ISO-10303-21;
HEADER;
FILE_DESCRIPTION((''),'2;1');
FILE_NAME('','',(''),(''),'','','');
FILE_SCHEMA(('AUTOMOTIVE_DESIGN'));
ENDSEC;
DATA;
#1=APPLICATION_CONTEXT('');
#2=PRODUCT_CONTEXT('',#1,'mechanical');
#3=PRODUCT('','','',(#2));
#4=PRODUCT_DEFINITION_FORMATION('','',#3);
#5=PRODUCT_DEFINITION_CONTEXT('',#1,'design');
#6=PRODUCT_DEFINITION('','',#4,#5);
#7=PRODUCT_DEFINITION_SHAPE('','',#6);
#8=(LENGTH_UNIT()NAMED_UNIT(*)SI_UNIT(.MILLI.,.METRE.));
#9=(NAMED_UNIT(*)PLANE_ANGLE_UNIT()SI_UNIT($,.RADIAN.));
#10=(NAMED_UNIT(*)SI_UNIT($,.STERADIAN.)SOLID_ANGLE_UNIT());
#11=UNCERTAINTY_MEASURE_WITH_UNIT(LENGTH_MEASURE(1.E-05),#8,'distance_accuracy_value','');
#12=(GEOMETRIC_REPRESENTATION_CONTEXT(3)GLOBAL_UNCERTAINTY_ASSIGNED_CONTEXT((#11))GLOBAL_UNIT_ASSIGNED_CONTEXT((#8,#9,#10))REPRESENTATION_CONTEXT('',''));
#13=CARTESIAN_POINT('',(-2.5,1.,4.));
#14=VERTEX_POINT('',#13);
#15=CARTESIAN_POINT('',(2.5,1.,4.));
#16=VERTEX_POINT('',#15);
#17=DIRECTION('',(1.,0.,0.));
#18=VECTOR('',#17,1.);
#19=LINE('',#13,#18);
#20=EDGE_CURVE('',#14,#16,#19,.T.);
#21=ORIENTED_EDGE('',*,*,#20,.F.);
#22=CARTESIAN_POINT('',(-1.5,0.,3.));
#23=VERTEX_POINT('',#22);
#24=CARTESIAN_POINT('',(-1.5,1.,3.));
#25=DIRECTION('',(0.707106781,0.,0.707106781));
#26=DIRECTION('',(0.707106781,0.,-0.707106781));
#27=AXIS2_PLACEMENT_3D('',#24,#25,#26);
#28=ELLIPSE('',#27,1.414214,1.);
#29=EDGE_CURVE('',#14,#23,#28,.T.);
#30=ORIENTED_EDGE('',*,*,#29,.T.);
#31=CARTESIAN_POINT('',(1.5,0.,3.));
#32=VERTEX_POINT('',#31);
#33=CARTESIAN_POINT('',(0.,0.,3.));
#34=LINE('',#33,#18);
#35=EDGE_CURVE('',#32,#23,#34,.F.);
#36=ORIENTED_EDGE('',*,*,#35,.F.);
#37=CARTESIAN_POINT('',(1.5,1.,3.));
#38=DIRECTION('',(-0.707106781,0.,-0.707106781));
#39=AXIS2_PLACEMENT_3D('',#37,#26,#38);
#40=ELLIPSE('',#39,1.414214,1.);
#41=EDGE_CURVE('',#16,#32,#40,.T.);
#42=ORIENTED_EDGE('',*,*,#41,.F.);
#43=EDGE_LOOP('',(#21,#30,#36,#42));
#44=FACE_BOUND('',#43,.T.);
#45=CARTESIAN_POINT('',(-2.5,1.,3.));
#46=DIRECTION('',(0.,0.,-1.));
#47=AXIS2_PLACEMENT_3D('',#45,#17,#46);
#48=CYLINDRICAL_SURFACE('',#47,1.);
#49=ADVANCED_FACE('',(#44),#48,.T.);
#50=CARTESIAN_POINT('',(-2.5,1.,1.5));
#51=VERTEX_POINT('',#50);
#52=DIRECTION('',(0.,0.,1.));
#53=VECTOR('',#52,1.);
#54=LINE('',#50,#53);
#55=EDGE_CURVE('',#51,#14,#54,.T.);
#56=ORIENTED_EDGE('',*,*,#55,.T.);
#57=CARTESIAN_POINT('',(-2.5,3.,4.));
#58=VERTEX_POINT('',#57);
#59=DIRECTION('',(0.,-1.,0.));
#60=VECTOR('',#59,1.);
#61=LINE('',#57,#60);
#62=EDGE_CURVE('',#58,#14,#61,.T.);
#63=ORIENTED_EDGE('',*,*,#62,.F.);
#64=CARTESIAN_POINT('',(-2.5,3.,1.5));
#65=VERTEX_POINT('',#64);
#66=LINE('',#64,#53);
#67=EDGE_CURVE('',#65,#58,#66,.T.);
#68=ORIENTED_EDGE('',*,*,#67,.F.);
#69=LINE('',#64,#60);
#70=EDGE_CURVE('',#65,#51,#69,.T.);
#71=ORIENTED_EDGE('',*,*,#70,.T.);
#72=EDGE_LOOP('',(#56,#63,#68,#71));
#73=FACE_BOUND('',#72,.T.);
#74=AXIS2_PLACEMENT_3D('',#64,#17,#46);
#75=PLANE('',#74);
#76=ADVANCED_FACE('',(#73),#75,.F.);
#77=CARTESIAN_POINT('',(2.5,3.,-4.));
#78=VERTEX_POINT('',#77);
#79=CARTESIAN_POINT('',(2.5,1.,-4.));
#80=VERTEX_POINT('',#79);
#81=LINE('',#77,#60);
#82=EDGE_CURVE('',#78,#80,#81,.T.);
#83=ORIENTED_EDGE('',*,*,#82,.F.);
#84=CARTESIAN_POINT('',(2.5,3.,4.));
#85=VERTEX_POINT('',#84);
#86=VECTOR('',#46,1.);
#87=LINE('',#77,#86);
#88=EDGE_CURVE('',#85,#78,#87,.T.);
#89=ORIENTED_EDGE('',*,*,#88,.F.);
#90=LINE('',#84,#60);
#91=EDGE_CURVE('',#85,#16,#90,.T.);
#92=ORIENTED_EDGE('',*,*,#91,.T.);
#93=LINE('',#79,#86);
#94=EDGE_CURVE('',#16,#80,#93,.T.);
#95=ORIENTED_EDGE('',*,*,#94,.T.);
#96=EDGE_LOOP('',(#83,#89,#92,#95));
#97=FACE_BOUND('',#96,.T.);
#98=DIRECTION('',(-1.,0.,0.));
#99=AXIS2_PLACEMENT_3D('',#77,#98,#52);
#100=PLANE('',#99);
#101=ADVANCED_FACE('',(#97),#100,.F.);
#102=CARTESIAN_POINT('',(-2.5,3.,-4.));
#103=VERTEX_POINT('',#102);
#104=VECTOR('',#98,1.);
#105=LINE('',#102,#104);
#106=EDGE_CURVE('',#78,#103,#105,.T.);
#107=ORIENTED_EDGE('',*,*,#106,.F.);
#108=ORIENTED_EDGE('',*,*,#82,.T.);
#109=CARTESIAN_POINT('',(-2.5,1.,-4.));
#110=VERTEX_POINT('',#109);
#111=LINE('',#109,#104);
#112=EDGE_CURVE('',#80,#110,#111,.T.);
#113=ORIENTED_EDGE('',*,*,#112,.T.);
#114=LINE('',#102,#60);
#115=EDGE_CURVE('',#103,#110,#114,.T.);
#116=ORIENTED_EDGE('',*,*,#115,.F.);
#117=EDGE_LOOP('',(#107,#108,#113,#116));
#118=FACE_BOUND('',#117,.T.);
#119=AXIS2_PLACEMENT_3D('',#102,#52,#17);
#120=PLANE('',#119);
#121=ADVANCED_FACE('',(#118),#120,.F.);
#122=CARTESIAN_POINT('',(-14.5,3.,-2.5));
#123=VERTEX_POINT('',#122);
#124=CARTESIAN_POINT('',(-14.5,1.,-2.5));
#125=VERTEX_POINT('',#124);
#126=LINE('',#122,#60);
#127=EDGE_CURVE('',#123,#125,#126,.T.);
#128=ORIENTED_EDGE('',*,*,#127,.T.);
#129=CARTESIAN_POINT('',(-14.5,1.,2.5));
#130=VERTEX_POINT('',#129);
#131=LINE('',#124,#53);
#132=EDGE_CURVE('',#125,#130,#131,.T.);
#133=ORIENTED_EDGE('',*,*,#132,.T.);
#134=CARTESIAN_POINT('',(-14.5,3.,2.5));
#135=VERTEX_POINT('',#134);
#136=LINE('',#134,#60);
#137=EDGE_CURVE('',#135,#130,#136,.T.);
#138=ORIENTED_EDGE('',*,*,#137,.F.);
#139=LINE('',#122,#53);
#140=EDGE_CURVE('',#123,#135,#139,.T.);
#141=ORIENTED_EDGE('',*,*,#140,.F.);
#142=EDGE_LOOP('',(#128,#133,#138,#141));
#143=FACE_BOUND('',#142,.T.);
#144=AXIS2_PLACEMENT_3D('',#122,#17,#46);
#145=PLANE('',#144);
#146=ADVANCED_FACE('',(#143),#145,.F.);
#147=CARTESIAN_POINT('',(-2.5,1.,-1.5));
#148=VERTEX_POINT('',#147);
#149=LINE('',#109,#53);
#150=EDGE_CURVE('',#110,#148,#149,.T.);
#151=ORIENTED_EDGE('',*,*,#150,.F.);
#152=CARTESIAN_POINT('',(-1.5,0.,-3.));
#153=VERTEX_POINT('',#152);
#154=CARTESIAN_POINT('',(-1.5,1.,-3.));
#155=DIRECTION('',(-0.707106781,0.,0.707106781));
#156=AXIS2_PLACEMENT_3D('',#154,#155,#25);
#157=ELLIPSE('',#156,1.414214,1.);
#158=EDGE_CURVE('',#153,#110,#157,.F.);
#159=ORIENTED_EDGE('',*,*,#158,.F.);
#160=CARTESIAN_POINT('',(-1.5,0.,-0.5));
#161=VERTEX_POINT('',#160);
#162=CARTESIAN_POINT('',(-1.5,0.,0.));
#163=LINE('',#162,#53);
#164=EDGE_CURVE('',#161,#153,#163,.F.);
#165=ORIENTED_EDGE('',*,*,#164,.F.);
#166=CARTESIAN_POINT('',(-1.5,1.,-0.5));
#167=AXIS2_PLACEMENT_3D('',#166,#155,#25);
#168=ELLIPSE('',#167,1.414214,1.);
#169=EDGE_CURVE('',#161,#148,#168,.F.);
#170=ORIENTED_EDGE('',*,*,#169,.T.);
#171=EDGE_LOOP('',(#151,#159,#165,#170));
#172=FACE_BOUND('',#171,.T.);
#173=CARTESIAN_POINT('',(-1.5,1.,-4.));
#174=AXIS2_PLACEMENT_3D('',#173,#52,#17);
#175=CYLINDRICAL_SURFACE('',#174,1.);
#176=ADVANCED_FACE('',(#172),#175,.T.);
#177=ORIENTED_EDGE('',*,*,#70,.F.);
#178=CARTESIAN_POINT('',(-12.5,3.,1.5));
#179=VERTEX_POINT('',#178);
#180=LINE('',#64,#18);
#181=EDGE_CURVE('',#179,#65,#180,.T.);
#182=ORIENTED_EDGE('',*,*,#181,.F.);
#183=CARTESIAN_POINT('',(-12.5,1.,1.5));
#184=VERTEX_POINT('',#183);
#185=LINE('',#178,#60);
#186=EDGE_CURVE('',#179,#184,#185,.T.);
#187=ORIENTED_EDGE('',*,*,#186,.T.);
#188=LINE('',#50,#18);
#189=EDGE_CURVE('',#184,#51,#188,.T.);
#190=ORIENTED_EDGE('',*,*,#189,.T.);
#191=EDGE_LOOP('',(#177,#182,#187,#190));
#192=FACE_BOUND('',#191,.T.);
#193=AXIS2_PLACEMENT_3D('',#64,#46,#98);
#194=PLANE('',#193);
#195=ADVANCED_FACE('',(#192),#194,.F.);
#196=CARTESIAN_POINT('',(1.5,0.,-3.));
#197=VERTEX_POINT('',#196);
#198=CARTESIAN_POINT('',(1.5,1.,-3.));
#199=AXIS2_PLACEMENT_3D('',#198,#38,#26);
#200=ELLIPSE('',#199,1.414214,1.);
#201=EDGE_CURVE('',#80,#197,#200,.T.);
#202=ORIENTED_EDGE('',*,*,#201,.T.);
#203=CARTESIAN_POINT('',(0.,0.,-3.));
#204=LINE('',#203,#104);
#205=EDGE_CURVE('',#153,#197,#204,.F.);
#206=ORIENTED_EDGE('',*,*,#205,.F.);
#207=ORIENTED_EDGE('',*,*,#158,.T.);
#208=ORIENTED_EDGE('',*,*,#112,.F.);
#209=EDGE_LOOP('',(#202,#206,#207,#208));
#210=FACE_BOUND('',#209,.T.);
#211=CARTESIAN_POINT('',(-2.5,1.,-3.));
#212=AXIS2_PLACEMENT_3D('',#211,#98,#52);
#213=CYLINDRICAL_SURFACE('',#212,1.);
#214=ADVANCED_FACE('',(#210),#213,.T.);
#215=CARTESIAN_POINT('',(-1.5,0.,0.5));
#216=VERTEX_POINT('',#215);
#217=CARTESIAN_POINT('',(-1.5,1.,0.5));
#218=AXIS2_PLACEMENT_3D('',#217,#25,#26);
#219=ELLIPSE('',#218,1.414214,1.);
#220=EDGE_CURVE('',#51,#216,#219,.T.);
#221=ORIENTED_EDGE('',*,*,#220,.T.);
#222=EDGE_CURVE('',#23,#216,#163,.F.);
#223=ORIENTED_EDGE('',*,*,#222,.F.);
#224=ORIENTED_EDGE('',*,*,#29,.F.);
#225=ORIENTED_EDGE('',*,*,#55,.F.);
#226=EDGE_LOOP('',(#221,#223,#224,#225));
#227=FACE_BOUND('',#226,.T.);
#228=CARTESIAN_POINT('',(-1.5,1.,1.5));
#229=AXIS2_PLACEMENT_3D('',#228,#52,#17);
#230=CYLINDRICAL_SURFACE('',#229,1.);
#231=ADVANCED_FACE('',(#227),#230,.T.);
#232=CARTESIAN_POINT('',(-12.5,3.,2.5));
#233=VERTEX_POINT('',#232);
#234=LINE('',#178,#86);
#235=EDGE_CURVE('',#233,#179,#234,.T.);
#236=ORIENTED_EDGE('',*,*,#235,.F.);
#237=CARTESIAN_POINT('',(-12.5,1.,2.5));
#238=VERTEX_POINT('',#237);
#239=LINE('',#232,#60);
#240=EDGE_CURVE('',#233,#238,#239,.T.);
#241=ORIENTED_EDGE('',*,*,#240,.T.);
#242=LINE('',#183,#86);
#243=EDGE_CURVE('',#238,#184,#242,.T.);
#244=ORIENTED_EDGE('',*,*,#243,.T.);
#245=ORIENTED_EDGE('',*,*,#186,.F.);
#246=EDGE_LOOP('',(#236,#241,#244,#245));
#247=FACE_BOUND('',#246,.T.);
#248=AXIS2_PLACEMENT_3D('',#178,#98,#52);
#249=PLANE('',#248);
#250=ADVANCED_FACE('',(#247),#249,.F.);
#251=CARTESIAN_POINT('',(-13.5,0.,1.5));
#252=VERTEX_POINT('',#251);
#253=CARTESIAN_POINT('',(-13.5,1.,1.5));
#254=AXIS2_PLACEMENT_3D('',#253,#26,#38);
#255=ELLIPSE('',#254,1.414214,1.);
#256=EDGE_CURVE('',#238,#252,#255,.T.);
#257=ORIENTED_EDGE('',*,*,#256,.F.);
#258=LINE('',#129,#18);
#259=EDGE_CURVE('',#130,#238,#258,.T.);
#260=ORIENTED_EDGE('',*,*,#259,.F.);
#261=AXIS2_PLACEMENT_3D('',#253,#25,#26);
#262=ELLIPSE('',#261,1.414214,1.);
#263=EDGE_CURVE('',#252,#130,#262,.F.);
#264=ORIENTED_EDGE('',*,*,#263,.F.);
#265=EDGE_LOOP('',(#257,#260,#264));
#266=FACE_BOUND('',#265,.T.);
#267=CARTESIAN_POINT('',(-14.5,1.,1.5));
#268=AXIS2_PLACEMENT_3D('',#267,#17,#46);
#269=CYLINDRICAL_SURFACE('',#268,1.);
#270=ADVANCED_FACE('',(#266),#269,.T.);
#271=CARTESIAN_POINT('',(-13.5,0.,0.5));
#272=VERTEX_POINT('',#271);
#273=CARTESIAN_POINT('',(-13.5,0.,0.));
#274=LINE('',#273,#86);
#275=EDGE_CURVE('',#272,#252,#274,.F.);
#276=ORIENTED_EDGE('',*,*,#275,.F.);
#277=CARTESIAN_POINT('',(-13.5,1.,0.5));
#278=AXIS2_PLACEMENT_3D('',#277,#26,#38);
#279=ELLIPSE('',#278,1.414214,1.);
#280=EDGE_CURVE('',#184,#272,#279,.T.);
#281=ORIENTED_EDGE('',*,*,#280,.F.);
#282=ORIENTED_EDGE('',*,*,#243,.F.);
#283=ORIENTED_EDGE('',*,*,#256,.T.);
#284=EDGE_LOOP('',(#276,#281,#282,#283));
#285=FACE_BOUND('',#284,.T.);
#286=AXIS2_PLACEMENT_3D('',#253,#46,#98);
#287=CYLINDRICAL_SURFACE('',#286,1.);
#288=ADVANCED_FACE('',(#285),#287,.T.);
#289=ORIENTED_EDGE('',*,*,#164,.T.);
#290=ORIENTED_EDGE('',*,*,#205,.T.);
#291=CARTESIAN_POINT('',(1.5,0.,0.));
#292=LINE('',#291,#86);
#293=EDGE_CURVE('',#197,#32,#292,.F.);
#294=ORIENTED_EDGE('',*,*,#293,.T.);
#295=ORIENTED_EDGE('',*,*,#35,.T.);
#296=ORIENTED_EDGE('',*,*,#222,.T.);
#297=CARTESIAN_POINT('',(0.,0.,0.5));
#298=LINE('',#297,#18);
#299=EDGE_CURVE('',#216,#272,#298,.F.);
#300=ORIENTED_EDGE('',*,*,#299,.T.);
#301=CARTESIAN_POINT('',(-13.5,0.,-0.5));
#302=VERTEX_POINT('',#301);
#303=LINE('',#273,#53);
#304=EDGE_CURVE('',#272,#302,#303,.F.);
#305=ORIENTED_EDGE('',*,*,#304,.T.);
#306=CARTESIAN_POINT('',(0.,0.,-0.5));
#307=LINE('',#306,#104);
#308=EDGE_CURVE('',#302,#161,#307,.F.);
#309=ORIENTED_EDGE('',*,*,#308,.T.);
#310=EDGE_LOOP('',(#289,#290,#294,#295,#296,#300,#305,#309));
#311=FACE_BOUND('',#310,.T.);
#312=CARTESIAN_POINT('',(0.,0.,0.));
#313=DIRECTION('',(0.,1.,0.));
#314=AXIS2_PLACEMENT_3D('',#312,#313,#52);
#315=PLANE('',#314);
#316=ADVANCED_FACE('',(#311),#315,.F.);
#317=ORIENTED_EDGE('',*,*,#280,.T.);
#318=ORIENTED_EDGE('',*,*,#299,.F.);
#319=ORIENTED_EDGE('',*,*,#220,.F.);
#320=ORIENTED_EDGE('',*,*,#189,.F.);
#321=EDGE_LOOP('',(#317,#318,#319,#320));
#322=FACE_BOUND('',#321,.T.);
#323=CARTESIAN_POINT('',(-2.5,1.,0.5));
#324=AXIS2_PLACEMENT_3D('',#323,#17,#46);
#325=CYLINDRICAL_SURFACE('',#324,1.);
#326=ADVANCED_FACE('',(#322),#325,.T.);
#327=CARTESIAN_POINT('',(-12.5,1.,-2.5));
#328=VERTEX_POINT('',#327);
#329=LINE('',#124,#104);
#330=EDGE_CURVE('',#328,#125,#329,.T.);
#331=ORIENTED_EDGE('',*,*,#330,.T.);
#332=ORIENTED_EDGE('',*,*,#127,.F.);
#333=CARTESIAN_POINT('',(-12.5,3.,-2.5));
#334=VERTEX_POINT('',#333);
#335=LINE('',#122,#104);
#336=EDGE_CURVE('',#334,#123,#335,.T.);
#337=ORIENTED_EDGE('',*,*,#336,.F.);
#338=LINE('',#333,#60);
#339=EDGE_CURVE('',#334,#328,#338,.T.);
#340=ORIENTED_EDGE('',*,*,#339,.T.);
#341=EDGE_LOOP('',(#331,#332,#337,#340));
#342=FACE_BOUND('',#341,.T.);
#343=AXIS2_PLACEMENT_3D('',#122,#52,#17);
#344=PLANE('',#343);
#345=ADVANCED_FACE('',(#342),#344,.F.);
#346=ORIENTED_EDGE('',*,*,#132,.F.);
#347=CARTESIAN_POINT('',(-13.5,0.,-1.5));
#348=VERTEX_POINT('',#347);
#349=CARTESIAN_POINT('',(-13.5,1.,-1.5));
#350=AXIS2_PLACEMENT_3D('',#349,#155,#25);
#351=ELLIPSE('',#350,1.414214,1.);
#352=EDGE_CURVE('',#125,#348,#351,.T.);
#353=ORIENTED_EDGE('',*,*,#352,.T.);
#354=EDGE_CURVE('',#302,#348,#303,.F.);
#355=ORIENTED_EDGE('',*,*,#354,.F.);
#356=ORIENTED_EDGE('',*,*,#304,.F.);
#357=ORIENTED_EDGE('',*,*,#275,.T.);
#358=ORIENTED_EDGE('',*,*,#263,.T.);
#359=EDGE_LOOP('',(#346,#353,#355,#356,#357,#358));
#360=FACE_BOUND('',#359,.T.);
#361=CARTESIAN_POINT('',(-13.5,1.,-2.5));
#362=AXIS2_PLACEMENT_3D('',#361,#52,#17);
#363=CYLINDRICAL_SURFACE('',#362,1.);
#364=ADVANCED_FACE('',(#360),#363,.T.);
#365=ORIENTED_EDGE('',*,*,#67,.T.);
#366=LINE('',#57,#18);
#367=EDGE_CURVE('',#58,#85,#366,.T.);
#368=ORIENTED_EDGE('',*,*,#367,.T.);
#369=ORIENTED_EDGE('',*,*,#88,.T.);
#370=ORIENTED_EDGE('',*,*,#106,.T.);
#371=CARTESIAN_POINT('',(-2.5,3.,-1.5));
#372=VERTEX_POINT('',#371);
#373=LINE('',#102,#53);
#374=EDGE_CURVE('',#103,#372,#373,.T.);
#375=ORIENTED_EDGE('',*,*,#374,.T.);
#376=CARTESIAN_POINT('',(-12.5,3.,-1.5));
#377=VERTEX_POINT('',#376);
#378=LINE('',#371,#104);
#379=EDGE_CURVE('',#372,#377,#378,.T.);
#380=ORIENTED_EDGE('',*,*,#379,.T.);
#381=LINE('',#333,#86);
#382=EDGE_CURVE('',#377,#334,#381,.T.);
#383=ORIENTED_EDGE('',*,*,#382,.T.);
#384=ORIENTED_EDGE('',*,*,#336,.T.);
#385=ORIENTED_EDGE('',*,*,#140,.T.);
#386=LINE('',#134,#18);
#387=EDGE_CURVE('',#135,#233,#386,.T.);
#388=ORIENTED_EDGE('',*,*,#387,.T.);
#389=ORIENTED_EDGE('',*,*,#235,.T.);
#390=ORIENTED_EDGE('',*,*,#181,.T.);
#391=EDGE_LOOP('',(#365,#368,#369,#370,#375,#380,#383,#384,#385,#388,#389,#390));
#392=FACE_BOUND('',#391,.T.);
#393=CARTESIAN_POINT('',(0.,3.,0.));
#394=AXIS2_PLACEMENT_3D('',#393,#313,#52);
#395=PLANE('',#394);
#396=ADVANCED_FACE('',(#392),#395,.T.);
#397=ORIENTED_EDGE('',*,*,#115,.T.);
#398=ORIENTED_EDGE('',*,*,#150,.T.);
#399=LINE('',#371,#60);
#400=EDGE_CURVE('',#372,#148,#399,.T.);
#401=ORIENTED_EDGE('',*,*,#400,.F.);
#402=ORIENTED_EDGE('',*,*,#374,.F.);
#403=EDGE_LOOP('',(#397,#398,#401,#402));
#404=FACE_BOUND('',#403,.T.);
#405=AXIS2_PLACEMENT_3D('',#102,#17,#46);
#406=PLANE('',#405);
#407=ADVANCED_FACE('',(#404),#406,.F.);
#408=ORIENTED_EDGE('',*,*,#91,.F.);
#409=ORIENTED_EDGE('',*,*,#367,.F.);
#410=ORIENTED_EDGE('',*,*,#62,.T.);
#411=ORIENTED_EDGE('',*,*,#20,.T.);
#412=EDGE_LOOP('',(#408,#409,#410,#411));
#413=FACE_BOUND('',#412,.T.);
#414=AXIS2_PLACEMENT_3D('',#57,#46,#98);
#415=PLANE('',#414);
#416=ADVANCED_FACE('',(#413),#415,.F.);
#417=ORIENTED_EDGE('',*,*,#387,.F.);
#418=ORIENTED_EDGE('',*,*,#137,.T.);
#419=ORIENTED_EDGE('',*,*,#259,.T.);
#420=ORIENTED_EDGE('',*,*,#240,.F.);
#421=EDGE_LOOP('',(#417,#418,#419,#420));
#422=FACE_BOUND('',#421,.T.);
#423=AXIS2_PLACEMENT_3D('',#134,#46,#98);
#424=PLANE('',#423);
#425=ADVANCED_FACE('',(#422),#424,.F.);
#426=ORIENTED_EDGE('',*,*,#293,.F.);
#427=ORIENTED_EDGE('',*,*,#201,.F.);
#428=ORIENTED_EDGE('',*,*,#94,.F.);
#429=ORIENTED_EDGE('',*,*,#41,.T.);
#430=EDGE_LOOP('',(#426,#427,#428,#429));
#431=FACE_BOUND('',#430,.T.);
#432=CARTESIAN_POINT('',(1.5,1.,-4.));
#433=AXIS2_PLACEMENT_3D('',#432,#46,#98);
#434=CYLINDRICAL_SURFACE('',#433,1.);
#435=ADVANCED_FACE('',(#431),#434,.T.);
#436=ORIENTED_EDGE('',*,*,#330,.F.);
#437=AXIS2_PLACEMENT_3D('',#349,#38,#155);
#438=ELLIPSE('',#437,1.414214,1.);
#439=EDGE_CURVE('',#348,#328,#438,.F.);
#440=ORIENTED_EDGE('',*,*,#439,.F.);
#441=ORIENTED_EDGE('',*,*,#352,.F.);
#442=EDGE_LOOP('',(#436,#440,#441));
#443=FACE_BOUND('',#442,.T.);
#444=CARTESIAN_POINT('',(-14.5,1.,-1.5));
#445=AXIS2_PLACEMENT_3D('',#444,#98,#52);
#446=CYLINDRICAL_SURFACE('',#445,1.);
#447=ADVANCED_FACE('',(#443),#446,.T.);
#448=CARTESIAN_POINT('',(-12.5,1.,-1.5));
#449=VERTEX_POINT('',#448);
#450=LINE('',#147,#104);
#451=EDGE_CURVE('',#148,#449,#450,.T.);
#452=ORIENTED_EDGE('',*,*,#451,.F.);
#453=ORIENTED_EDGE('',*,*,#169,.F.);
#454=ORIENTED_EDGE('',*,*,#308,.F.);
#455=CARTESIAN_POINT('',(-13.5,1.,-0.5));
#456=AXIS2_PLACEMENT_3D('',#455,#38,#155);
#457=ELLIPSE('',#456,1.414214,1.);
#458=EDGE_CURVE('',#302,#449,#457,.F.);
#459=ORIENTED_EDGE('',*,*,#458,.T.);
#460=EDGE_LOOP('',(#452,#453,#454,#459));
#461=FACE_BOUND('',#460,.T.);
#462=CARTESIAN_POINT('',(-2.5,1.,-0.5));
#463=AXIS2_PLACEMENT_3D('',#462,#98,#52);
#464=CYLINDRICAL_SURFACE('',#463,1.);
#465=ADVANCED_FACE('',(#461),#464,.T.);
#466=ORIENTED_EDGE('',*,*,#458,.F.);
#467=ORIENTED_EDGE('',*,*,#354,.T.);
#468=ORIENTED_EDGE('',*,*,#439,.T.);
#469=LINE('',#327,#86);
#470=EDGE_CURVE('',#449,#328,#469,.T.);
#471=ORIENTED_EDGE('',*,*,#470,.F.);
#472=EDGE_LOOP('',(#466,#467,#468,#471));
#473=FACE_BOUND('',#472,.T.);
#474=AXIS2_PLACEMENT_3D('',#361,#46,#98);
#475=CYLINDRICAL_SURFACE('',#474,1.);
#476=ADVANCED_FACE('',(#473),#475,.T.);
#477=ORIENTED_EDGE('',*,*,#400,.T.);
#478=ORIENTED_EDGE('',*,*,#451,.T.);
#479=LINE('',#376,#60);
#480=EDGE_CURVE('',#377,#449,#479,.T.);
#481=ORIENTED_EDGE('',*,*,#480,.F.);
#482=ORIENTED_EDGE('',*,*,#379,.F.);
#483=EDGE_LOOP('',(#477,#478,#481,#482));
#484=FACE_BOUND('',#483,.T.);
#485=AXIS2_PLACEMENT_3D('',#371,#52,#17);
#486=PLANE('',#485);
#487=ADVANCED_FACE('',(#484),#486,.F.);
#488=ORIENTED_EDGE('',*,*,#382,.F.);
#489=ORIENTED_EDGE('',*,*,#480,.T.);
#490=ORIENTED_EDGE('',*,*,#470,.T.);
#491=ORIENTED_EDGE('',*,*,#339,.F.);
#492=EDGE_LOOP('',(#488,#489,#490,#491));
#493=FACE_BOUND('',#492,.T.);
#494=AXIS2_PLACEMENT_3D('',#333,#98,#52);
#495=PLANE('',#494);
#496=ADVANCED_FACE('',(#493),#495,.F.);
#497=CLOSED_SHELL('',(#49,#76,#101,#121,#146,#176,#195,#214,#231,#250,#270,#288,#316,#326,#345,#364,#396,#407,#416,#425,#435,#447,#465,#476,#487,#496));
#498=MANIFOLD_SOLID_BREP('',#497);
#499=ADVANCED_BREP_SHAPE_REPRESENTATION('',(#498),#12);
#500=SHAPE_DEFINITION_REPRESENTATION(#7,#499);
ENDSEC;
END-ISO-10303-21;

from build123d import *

# Parameters (mm, degrees)
BOSS_EXTRUDE1_DEPTH = 3
FILLET2_R           = 1


with BuildPart() as part:
    # Sketch1 → Boss-Extrude1 (new body)
    with BuildSketch(Plane(origin=(0, 0, 0), x_dir=(1, 0, 0), z_dir=(0, 1, 0))):
        Polygon((-12.5, -1.5), (-12.5, -2.5), (-14.5, -2.5), (-14.5, 2.5), (-12.5, 2.5), (-12.5, 1.5), (-2.5, 1.5), (-2.5, 4), (2.5, 4), (2.5, -4), (-2.5, -4), (-2.5, -1.5), align=None)
    extrude(amount=BOSS_EXTRUDE1_DEPTH)

    # Fillet2
    fillet2_edges = [part.edges().sort_by_distance(p)[0] for p in [
        (0, 0, 4),
        (-2.5, 0, 2.75),
        (-7.5, 0, 1.5),
        (-12.5, 0, 2),
        (-13.5, 0, 2.5),
        (-14.5, 0, 0),
        (-13.5, 0, -2.5),
        (-12.5, 0, -2),
        (-7.5, 0, -1.5),
        (-2.5, 0, -2.75),
        (0, 0, -4),
        (2.5, 0, 0),
    ]]
    fillet(fillet2_edges, radius=FILLET2_R - 0.0001)  # a hair under: the kernel refuses the full size


solid = part.part
